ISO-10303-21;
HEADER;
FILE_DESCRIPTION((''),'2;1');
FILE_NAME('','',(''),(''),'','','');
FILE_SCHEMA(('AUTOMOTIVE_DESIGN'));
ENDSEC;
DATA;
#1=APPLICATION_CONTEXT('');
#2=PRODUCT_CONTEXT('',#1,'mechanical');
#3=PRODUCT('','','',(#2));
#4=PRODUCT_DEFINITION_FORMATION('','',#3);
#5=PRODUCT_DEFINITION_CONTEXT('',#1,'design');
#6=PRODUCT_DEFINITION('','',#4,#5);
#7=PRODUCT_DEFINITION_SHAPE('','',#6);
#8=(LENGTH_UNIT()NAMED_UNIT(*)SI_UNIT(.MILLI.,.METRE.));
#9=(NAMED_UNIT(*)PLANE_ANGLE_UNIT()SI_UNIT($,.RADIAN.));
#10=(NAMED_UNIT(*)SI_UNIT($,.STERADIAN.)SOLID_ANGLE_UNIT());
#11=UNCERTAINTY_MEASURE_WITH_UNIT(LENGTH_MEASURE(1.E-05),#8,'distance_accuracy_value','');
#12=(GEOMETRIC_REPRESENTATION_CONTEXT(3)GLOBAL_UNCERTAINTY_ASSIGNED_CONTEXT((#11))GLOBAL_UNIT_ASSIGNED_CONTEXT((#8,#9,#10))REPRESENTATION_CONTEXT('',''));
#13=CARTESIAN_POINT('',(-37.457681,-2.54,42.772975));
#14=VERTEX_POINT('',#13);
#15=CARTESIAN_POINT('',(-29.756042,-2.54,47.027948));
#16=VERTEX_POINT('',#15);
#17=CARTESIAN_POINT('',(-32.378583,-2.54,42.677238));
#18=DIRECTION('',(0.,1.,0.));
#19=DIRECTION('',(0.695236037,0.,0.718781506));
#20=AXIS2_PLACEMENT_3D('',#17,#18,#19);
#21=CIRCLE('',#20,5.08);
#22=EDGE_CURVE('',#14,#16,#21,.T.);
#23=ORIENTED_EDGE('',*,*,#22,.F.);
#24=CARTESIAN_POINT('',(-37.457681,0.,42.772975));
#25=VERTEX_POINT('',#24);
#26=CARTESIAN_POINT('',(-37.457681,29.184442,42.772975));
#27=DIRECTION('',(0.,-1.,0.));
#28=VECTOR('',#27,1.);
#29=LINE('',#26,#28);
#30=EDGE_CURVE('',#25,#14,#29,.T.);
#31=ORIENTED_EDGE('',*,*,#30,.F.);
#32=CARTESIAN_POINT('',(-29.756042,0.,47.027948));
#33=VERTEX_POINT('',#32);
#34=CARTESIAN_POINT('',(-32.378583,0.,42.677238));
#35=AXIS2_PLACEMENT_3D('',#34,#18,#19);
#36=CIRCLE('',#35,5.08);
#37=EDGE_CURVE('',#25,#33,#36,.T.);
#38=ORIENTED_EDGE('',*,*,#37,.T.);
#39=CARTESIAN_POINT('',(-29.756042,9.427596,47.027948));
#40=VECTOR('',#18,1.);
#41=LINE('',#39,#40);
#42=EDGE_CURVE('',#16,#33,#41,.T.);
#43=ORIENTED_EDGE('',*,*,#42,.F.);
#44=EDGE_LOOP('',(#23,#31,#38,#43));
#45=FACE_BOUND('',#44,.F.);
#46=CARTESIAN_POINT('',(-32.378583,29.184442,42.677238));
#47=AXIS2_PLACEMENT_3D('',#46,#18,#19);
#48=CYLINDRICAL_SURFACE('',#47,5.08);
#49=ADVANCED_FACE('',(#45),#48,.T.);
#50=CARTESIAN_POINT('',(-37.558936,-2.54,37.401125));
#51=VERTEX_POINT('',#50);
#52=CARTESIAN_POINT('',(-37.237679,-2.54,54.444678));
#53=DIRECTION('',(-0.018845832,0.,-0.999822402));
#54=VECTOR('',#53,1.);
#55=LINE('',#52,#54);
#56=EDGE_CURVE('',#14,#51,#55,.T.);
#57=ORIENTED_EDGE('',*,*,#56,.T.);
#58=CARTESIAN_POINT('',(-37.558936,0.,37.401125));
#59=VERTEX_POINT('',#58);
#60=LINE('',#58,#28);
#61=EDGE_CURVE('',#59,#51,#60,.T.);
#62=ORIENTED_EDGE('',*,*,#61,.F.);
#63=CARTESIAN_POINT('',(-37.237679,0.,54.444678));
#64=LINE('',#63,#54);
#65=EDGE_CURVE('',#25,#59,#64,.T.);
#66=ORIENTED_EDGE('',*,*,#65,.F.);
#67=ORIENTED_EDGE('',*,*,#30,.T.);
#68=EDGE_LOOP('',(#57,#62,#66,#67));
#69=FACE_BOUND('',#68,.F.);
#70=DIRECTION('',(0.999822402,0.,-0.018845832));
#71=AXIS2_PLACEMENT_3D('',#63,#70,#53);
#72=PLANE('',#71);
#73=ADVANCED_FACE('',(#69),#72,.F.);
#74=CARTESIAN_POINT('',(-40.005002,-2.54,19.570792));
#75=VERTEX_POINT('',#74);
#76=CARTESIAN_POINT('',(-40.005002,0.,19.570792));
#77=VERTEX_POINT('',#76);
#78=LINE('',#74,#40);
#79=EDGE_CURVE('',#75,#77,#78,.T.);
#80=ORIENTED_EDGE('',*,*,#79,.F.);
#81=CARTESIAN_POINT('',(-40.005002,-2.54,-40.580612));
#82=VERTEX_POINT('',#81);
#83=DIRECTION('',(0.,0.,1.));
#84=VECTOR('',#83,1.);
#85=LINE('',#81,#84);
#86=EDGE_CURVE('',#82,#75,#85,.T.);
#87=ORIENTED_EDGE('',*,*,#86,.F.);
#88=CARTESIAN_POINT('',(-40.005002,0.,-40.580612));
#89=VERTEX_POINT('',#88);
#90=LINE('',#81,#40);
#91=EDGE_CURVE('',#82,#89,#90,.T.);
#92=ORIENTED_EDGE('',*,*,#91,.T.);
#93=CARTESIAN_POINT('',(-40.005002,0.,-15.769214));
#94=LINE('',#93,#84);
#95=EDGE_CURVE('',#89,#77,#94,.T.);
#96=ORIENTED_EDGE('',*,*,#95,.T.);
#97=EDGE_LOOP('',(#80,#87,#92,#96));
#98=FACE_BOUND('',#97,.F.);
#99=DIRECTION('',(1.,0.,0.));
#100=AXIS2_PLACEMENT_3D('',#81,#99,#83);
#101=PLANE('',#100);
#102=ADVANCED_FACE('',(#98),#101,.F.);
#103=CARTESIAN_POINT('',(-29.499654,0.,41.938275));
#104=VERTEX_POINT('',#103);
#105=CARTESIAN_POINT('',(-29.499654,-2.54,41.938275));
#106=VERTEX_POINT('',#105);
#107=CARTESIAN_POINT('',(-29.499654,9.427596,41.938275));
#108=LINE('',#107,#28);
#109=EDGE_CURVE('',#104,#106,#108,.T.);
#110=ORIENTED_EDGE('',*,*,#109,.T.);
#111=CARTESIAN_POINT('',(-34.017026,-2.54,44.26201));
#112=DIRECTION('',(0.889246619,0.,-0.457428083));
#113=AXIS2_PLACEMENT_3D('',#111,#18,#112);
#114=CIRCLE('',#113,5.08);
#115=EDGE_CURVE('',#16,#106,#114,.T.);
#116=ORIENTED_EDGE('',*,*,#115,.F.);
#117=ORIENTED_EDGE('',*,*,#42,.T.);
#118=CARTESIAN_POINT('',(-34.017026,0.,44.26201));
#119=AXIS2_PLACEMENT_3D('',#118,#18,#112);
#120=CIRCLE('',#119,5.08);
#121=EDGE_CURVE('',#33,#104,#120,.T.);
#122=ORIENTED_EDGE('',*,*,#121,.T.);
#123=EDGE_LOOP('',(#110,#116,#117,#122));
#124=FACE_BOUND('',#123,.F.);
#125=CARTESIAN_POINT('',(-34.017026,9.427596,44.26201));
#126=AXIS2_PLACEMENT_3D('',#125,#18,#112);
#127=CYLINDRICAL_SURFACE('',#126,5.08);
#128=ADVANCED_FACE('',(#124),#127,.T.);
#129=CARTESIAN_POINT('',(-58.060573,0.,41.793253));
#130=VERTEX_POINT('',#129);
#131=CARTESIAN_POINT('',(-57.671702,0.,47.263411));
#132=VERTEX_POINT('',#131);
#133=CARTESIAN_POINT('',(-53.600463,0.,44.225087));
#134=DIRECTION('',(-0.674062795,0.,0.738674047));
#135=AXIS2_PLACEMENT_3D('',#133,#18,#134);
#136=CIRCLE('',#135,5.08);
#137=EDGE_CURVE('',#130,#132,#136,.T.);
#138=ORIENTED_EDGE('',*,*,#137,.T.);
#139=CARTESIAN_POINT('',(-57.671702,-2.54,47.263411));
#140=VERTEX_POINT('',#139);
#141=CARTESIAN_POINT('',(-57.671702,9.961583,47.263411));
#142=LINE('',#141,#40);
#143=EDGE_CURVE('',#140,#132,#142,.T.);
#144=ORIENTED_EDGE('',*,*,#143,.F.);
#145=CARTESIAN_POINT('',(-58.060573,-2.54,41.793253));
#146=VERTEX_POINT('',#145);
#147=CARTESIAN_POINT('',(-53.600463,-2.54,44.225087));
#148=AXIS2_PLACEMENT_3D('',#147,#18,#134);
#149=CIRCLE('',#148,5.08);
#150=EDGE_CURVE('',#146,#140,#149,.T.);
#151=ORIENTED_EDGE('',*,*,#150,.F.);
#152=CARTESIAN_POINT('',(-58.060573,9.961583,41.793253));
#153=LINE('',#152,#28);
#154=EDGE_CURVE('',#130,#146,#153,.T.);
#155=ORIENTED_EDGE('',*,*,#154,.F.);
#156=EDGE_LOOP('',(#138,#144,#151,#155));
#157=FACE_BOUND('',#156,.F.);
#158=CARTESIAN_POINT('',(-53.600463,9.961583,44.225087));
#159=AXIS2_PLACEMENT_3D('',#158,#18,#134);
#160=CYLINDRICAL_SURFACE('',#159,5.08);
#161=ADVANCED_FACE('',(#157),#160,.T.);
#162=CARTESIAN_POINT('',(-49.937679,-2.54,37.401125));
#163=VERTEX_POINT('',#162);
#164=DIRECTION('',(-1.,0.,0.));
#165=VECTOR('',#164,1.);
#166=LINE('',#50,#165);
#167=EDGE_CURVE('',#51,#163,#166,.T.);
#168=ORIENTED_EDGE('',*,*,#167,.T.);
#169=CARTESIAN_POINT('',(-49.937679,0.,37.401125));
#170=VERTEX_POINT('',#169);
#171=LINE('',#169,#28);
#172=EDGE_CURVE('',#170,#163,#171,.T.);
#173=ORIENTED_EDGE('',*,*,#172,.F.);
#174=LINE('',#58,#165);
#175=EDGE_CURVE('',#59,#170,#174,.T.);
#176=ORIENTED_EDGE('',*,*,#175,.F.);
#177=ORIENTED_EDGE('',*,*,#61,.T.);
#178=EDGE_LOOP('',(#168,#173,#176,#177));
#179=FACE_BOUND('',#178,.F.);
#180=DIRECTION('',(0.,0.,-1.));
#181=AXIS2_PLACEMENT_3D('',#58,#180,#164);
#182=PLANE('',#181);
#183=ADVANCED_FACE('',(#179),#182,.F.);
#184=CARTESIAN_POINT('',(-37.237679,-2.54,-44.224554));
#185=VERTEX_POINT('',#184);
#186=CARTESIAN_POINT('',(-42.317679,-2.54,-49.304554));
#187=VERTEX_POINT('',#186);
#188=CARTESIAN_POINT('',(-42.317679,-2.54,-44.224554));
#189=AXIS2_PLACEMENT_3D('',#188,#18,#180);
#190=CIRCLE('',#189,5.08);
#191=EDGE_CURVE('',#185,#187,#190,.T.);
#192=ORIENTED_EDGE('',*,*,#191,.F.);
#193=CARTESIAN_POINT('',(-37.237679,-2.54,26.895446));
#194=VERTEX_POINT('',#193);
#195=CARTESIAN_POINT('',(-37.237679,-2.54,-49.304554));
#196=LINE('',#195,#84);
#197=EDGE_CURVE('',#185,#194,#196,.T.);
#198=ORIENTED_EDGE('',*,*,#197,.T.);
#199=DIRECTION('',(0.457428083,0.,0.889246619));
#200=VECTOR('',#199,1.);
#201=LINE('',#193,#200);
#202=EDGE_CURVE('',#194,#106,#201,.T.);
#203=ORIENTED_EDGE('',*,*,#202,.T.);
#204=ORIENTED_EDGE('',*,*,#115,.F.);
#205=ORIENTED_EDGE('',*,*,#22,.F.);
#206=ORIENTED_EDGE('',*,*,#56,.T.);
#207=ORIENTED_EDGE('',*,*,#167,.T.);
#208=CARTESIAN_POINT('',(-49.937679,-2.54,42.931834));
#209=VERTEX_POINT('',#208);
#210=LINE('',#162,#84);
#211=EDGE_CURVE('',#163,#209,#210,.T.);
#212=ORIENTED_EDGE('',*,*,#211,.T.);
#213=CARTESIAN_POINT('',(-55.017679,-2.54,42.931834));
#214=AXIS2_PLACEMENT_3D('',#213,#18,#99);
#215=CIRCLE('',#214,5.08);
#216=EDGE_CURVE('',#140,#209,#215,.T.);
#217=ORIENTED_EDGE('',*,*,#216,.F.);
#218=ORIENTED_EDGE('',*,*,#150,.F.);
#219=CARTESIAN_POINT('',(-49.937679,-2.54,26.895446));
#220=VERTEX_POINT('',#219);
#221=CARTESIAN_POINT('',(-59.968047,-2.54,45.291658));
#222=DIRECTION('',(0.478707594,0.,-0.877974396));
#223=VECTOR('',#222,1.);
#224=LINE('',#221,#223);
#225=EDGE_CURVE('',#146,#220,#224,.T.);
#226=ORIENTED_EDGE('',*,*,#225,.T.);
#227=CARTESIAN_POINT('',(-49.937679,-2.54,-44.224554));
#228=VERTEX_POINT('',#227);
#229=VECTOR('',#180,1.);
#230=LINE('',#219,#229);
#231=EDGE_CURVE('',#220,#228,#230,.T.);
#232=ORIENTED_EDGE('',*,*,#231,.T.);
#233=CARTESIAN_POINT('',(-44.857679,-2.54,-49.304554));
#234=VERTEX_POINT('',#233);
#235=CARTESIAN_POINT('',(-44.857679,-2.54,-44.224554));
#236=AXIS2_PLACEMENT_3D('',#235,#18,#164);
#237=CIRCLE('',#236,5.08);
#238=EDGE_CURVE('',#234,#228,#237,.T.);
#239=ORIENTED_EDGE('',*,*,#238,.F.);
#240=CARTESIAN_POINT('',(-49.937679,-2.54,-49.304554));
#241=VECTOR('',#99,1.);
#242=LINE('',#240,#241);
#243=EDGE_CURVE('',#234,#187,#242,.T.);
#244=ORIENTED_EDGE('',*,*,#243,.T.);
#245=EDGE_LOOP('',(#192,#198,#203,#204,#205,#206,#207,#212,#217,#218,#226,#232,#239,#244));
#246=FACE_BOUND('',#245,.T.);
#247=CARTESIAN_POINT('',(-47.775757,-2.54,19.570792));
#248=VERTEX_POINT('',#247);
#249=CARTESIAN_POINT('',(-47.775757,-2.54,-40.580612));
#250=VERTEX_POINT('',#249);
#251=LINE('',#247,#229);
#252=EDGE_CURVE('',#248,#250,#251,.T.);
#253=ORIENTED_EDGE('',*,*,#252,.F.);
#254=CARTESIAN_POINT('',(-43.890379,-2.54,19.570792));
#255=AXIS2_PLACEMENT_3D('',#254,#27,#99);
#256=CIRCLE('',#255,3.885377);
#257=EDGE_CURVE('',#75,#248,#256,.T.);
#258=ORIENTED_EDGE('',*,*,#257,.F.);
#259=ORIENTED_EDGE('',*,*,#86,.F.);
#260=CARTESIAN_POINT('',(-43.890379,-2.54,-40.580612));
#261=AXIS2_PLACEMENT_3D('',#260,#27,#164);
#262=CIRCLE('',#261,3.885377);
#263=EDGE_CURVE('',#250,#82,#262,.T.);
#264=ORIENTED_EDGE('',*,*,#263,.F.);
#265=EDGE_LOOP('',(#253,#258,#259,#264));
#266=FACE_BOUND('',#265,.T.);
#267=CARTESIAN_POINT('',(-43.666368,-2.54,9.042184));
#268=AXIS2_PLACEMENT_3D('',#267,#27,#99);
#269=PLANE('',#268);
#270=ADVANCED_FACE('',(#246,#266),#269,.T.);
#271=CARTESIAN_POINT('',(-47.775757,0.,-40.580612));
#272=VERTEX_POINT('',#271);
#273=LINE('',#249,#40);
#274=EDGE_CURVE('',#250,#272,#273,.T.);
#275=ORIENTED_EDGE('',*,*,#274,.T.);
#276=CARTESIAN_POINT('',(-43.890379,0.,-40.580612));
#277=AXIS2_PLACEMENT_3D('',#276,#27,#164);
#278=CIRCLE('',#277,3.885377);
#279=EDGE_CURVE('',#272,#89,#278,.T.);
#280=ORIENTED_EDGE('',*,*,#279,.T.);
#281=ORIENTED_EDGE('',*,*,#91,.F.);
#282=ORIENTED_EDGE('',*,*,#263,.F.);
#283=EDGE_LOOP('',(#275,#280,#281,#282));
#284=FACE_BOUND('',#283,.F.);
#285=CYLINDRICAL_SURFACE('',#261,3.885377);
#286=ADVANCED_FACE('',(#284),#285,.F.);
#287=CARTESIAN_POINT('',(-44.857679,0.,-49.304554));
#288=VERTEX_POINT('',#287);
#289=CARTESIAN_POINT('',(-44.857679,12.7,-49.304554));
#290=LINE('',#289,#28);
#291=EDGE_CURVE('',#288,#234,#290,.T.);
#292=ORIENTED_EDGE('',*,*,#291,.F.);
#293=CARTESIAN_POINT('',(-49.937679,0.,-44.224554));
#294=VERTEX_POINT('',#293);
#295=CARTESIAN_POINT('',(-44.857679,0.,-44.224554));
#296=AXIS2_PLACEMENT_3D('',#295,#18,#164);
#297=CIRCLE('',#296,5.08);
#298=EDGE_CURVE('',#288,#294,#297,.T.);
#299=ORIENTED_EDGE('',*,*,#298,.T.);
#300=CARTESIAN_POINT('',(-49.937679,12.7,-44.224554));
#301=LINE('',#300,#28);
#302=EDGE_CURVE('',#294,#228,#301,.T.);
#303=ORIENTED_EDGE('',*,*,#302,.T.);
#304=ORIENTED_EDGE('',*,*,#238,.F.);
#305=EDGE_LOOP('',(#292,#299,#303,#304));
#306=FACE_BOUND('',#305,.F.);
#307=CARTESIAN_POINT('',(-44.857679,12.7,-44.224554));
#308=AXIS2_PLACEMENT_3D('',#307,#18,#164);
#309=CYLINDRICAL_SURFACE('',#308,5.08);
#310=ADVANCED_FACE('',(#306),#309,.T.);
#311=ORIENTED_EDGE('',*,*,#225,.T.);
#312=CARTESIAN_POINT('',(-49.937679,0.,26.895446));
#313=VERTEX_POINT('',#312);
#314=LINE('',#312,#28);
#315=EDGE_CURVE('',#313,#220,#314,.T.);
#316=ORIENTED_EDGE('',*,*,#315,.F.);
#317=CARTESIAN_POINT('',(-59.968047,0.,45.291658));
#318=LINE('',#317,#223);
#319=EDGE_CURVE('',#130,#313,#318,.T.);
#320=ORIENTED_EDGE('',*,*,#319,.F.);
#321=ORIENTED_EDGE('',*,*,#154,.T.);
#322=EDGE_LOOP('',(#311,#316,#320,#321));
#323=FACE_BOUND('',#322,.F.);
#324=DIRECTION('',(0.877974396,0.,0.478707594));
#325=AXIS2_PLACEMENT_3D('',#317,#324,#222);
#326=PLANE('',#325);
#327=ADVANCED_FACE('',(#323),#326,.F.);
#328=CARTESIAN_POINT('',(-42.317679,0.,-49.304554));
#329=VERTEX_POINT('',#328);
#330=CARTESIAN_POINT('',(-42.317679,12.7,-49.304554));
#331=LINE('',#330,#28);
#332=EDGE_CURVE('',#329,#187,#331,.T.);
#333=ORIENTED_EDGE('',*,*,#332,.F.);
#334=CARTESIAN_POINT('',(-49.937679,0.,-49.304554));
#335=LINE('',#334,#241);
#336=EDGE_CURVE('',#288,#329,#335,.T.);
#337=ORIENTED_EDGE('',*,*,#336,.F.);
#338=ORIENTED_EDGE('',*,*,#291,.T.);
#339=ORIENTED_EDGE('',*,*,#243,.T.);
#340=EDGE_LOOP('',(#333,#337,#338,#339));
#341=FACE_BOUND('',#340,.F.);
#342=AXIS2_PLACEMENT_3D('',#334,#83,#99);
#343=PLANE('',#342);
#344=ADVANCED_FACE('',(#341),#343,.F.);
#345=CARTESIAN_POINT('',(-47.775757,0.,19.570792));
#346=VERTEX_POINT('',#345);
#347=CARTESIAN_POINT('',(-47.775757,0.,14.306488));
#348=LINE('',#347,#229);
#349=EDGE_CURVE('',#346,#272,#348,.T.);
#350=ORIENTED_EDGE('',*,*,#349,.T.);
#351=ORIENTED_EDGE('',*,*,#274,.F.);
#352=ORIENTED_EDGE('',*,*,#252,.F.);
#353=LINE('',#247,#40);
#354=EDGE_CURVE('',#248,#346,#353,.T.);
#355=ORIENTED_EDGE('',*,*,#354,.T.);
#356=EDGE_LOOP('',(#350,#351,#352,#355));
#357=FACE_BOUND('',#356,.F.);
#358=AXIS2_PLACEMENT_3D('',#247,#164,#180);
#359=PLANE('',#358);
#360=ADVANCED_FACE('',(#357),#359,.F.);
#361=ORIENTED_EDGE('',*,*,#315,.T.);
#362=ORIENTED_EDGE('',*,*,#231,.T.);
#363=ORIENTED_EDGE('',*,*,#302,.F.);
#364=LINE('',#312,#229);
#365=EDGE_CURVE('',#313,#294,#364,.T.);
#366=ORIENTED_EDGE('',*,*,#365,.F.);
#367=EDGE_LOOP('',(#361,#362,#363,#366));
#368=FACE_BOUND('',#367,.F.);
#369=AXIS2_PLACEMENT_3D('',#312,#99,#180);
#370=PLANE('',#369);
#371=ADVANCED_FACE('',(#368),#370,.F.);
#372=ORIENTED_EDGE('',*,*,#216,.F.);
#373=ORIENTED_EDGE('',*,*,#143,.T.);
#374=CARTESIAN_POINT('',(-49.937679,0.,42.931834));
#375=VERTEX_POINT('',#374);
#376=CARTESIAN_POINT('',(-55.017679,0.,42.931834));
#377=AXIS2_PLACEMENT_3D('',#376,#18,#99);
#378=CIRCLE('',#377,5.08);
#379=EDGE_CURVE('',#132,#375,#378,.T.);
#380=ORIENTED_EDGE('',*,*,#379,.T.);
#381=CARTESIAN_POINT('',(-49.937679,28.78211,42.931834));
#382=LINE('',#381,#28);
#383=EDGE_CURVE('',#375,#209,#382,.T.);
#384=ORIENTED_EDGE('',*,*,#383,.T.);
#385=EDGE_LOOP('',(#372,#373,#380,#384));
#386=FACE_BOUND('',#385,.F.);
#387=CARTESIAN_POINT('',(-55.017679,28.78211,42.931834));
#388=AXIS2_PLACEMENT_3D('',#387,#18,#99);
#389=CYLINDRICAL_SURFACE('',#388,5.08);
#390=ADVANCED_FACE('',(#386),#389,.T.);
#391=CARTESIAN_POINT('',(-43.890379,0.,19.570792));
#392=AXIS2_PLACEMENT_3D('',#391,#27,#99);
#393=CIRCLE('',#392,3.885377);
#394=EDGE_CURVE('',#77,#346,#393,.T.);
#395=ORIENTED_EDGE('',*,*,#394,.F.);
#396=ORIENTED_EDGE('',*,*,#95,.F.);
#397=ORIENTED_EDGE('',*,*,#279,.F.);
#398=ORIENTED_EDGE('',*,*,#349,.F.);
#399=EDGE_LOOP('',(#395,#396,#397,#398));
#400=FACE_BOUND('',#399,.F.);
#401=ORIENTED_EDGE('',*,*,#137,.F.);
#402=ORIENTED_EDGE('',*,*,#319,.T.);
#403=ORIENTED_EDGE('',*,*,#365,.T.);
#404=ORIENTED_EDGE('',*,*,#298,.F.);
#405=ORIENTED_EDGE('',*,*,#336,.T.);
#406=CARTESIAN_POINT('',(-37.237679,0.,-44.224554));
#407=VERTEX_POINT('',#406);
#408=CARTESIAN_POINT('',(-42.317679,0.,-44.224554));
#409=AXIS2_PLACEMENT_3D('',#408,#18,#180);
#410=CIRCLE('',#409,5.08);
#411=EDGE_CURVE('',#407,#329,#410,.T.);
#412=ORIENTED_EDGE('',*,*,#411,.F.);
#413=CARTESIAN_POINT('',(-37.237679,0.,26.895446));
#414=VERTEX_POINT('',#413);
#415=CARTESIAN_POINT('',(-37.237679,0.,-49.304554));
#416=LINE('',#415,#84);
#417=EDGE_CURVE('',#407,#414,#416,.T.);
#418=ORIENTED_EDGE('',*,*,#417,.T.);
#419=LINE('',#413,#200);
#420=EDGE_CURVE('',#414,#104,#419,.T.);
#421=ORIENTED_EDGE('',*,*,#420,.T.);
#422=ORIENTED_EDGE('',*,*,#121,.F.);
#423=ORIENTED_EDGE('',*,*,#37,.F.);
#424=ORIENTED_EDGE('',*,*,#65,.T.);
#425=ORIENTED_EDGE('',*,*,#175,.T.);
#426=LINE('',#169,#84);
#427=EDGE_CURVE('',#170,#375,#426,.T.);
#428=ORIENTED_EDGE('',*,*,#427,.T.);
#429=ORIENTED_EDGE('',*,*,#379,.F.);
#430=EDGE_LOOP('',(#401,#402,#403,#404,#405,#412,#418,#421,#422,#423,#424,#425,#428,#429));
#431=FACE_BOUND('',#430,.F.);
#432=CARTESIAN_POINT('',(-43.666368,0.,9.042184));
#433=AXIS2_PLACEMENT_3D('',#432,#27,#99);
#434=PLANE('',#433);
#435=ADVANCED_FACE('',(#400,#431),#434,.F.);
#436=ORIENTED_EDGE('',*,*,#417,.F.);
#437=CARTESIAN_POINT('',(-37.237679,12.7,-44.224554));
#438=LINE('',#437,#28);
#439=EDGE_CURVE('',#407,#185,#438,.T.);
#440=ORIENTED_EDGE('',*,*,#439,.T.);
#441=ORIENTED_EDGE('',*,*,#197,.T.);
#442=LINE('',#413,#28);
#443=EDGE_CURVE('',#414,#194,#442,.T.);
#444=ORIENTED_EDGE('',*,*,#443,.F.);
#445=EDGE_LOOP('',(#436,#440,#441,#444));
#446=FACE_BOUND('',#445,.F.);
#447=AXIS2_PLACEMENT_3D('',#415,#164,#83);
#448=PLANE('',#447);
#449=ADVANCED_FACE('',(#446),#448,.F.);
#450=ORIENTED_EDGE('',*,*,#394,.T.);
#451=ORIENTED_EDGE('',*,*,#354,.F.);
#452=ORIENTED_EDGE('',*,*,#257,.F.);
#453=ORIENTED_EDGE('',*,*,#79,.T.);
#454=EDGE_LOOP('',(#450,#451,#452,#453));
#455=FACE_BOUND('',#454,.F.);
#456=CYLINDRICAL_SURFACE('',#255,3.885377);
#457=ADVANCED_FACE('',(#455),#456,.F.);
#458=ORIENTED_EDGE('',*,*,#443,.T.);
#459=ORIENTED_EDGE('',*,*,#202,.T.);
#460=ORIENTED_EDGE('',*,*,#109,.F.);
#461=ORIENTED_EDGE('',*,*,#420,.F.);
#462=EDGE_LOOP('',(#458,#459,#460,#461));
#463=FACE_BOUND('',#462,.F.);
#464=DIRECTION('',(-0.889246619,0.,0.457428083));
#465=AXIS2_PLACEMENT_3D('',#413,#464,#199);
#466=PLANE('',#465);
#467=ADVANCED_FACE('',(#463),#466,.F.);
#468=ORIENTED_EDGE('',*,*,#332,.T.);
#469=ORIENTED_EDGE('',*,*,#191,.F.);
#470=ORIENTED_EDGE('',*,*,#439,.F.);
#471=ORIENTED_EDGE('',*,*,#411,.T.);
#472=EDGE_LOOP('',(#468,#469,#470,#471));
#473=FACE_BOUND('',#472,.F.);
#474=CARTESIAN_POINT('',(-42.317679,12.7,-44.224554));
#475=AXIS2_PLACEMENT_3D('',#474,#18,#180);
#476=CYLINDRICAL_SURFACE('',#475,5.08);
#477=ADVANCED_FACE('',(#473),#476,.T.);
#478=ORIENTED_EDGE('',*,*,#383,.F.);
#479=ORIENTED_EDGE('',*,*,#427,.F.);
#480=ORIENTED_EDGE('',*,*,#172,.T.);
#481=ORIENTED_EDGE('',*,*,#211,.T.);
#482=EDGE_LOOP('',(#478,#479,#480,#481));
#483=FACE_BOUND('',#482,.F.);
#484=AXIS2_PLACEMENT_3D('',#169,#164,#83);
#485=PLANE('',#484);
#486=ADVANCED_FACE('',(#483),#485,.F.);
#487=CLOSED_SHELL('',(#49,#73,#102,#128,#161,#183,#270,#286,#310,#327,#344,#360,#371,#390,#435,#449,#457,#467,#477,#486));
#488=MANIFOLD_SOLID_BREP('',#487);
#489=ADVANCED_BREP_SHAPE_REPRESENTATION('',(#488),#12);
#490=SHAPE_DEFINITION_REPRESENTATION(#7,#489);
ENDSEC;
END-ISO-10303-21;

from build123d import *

# Parameters (mm, degrees)
F1_DEPTH    = 2.54
F2_T1_DEPTH = 21.3951912934
F2_T3_DEPTH = 22.4631654102
F2_T5_DEPTH = 27.94
F2_T7_DEPTH = 60.9088837652
F2_T9_DEPTH = 60.1042195061
F4_DEPTH    = 2.541


# Not quite as in the source:
# - a fillet or chamfer that OpenCascade refuses, or shapes differently, is made with other operations: its cross-section is extruded or revolved along the edge and cut away or added


with BuildPart() as f1:
    # F0 (on Front) → F1 (new body)
    with BuildSketch(Plane.XZ):
        Polygon((-49.9376785943, 26.895446232), (-49.9376785943, -49.304553768), (-37.2376785943, -49.304553768), (-37.2376785943, 26.895446232), (-27.7746748179, 45.2916584909), (-37.2376785943, 54.4446781278), (-37.5589355826, 37.401124835), (-49.9376785943, 37.401124835), (-49.9376785943, 54.4446781278), (-59.968046844, 45.2916584909), align=None)
    extrude(amount=F1_DEPTH)

    # F2: fillet of radius 5.08 on 6 edges, made by hand

    # F2_s2 → F2_t1 (cut)
    with BuildSketch(Plane.XZ.offset(-9.4275956467)):
        with BuildLine():
            ThreePointArc((-29.49965362, 41.9382754706), (-29.0047534445, 45.0887624488), (-30.4852273769, 47.9134201836))
            Line((-30.4852273769, 47.9134201836), (-27.7746748179, 45.2916584909))
            Line((-27.7746748179, 45.2916584909), (-29.49965362, 41.9382754706))
        make_face()
    extrude(amount=F2_T1_DEPTH, mode=Mode.SUBTRACT)

    # F2_s4 → F2_t3 (cut)
    with BuildSketch(Plane.XZ.offset(-9.9615827051)):
        with BuildLine():
            ThreePointArc((-57.0247017985, 47.9775514042), (-58.6106651129, 45.064296855), (-58.0605727295, 41.7932526681))
            Line((-58.0605727295, 41.7932526681), (-59.968046844, 45.2916584909))
            Line((-59.968046844, 45.2916584909), (-57.0247017985, 47.9775514042))
        make_face()
    extrude(amount=F2_T3_DEPTH, mode=Mode.SUBTRACT)

    # F2_s6 → F2_t5 (cut)
    with BuildSketch(Plane.XZ.offset(-12.7)):
        with BuildLine():
            ThreePointArc((-42.3176785943, -49.304553768), (-38.7255761459, -47.8166562165), (-37.2376785943, -44.224553768))
            Line((-37.2376785943, -44.224553768), (-37.2376785943, -49.304553768))
            Line((-37.2376785943, -49.304553768), (-42.3176785943, -49.304553768))
        make_face()
        with BuildLine():
            ThreePointArc((-49.9376785943, -44.224553768), (-48.4497810427, -47.8166562165), (-44.8576785943, -49.304553768))
            Line((-44.8576785943, -49.304553768), (-49.9376785943, -49.304553768))
            Line((-49.9376785943, -49.304553768), (-49.9376785943, -44.224553768))
        make_face()
    extrude(amount=F2_T5_DEPTH, mode=Mode.SUBTRACT)

    # F2_s8 → F2_t7 (cut)
    with BuildSketch(Plane.XZ.offset(-29.1844418826)):
        with BuildLine():
            ThreePointArc((-28.8467837584, 46.3286478461), (-34.3174578503, 47.3726785237), (-37.457680624, 42.7729746194))
            Line((-37.457680624, 42.7729746194), (-37.2376785943, 54.4446781278))
            Line((-37.2376785943, 54.4446781278), (-28.8467837584, 46.3286478461))
        make_face()
    extrude(amount=F2_T7_DEPTH, mode=Mode.SUBTRACT)

    # F2_s10 → F2_t9 (cut)
    with BuildSketch(Plane.XZ.offset(-28.782109753)):
        with BuildLine():
            ThreePointArc((-49.9376785943, 42.9318342266), (-52.9669146048, 47.5794967637), (-58.4419175941, 46.6842983866))
            Line((-58.4419175941, 46.6842983866), (-49.9376785943, 54.4446781278))
            Line((-49.9376785943, 54.4446781278), (-49.9376785943, 42.9318342266))
        make_face()
    extrude(amount=F2_T9_DEPTH, mode=Mode.SUBTRACT)

    # F3 (on face) → F4 (cut, through all)
    with BuildSketch(Plane.XZ.offset(2.54)):
        with BuildLine():
            Line((-40.0050021708, -40.580611676), (-40.0050021708, 19.5707920939))
            ThreePointArc((-40.0050021708, 19.5707920939), (-43.8903793693, 23.4561692923), (-47.7757565677, 19.5707920939))
            Line((-47.7757565677, 19.5707920939), (-47.7757565677, -40.580611676))
            ThreePointArc((-47.7757565677, -40.580611676), (-43.8903793693, -44.4659888744), (-40.0050021708, -40.580611676))
        make_face()
    extrude(amount=-F4_DEPTH, mode=Mode.SUBTRACT)


solid = f1.part
